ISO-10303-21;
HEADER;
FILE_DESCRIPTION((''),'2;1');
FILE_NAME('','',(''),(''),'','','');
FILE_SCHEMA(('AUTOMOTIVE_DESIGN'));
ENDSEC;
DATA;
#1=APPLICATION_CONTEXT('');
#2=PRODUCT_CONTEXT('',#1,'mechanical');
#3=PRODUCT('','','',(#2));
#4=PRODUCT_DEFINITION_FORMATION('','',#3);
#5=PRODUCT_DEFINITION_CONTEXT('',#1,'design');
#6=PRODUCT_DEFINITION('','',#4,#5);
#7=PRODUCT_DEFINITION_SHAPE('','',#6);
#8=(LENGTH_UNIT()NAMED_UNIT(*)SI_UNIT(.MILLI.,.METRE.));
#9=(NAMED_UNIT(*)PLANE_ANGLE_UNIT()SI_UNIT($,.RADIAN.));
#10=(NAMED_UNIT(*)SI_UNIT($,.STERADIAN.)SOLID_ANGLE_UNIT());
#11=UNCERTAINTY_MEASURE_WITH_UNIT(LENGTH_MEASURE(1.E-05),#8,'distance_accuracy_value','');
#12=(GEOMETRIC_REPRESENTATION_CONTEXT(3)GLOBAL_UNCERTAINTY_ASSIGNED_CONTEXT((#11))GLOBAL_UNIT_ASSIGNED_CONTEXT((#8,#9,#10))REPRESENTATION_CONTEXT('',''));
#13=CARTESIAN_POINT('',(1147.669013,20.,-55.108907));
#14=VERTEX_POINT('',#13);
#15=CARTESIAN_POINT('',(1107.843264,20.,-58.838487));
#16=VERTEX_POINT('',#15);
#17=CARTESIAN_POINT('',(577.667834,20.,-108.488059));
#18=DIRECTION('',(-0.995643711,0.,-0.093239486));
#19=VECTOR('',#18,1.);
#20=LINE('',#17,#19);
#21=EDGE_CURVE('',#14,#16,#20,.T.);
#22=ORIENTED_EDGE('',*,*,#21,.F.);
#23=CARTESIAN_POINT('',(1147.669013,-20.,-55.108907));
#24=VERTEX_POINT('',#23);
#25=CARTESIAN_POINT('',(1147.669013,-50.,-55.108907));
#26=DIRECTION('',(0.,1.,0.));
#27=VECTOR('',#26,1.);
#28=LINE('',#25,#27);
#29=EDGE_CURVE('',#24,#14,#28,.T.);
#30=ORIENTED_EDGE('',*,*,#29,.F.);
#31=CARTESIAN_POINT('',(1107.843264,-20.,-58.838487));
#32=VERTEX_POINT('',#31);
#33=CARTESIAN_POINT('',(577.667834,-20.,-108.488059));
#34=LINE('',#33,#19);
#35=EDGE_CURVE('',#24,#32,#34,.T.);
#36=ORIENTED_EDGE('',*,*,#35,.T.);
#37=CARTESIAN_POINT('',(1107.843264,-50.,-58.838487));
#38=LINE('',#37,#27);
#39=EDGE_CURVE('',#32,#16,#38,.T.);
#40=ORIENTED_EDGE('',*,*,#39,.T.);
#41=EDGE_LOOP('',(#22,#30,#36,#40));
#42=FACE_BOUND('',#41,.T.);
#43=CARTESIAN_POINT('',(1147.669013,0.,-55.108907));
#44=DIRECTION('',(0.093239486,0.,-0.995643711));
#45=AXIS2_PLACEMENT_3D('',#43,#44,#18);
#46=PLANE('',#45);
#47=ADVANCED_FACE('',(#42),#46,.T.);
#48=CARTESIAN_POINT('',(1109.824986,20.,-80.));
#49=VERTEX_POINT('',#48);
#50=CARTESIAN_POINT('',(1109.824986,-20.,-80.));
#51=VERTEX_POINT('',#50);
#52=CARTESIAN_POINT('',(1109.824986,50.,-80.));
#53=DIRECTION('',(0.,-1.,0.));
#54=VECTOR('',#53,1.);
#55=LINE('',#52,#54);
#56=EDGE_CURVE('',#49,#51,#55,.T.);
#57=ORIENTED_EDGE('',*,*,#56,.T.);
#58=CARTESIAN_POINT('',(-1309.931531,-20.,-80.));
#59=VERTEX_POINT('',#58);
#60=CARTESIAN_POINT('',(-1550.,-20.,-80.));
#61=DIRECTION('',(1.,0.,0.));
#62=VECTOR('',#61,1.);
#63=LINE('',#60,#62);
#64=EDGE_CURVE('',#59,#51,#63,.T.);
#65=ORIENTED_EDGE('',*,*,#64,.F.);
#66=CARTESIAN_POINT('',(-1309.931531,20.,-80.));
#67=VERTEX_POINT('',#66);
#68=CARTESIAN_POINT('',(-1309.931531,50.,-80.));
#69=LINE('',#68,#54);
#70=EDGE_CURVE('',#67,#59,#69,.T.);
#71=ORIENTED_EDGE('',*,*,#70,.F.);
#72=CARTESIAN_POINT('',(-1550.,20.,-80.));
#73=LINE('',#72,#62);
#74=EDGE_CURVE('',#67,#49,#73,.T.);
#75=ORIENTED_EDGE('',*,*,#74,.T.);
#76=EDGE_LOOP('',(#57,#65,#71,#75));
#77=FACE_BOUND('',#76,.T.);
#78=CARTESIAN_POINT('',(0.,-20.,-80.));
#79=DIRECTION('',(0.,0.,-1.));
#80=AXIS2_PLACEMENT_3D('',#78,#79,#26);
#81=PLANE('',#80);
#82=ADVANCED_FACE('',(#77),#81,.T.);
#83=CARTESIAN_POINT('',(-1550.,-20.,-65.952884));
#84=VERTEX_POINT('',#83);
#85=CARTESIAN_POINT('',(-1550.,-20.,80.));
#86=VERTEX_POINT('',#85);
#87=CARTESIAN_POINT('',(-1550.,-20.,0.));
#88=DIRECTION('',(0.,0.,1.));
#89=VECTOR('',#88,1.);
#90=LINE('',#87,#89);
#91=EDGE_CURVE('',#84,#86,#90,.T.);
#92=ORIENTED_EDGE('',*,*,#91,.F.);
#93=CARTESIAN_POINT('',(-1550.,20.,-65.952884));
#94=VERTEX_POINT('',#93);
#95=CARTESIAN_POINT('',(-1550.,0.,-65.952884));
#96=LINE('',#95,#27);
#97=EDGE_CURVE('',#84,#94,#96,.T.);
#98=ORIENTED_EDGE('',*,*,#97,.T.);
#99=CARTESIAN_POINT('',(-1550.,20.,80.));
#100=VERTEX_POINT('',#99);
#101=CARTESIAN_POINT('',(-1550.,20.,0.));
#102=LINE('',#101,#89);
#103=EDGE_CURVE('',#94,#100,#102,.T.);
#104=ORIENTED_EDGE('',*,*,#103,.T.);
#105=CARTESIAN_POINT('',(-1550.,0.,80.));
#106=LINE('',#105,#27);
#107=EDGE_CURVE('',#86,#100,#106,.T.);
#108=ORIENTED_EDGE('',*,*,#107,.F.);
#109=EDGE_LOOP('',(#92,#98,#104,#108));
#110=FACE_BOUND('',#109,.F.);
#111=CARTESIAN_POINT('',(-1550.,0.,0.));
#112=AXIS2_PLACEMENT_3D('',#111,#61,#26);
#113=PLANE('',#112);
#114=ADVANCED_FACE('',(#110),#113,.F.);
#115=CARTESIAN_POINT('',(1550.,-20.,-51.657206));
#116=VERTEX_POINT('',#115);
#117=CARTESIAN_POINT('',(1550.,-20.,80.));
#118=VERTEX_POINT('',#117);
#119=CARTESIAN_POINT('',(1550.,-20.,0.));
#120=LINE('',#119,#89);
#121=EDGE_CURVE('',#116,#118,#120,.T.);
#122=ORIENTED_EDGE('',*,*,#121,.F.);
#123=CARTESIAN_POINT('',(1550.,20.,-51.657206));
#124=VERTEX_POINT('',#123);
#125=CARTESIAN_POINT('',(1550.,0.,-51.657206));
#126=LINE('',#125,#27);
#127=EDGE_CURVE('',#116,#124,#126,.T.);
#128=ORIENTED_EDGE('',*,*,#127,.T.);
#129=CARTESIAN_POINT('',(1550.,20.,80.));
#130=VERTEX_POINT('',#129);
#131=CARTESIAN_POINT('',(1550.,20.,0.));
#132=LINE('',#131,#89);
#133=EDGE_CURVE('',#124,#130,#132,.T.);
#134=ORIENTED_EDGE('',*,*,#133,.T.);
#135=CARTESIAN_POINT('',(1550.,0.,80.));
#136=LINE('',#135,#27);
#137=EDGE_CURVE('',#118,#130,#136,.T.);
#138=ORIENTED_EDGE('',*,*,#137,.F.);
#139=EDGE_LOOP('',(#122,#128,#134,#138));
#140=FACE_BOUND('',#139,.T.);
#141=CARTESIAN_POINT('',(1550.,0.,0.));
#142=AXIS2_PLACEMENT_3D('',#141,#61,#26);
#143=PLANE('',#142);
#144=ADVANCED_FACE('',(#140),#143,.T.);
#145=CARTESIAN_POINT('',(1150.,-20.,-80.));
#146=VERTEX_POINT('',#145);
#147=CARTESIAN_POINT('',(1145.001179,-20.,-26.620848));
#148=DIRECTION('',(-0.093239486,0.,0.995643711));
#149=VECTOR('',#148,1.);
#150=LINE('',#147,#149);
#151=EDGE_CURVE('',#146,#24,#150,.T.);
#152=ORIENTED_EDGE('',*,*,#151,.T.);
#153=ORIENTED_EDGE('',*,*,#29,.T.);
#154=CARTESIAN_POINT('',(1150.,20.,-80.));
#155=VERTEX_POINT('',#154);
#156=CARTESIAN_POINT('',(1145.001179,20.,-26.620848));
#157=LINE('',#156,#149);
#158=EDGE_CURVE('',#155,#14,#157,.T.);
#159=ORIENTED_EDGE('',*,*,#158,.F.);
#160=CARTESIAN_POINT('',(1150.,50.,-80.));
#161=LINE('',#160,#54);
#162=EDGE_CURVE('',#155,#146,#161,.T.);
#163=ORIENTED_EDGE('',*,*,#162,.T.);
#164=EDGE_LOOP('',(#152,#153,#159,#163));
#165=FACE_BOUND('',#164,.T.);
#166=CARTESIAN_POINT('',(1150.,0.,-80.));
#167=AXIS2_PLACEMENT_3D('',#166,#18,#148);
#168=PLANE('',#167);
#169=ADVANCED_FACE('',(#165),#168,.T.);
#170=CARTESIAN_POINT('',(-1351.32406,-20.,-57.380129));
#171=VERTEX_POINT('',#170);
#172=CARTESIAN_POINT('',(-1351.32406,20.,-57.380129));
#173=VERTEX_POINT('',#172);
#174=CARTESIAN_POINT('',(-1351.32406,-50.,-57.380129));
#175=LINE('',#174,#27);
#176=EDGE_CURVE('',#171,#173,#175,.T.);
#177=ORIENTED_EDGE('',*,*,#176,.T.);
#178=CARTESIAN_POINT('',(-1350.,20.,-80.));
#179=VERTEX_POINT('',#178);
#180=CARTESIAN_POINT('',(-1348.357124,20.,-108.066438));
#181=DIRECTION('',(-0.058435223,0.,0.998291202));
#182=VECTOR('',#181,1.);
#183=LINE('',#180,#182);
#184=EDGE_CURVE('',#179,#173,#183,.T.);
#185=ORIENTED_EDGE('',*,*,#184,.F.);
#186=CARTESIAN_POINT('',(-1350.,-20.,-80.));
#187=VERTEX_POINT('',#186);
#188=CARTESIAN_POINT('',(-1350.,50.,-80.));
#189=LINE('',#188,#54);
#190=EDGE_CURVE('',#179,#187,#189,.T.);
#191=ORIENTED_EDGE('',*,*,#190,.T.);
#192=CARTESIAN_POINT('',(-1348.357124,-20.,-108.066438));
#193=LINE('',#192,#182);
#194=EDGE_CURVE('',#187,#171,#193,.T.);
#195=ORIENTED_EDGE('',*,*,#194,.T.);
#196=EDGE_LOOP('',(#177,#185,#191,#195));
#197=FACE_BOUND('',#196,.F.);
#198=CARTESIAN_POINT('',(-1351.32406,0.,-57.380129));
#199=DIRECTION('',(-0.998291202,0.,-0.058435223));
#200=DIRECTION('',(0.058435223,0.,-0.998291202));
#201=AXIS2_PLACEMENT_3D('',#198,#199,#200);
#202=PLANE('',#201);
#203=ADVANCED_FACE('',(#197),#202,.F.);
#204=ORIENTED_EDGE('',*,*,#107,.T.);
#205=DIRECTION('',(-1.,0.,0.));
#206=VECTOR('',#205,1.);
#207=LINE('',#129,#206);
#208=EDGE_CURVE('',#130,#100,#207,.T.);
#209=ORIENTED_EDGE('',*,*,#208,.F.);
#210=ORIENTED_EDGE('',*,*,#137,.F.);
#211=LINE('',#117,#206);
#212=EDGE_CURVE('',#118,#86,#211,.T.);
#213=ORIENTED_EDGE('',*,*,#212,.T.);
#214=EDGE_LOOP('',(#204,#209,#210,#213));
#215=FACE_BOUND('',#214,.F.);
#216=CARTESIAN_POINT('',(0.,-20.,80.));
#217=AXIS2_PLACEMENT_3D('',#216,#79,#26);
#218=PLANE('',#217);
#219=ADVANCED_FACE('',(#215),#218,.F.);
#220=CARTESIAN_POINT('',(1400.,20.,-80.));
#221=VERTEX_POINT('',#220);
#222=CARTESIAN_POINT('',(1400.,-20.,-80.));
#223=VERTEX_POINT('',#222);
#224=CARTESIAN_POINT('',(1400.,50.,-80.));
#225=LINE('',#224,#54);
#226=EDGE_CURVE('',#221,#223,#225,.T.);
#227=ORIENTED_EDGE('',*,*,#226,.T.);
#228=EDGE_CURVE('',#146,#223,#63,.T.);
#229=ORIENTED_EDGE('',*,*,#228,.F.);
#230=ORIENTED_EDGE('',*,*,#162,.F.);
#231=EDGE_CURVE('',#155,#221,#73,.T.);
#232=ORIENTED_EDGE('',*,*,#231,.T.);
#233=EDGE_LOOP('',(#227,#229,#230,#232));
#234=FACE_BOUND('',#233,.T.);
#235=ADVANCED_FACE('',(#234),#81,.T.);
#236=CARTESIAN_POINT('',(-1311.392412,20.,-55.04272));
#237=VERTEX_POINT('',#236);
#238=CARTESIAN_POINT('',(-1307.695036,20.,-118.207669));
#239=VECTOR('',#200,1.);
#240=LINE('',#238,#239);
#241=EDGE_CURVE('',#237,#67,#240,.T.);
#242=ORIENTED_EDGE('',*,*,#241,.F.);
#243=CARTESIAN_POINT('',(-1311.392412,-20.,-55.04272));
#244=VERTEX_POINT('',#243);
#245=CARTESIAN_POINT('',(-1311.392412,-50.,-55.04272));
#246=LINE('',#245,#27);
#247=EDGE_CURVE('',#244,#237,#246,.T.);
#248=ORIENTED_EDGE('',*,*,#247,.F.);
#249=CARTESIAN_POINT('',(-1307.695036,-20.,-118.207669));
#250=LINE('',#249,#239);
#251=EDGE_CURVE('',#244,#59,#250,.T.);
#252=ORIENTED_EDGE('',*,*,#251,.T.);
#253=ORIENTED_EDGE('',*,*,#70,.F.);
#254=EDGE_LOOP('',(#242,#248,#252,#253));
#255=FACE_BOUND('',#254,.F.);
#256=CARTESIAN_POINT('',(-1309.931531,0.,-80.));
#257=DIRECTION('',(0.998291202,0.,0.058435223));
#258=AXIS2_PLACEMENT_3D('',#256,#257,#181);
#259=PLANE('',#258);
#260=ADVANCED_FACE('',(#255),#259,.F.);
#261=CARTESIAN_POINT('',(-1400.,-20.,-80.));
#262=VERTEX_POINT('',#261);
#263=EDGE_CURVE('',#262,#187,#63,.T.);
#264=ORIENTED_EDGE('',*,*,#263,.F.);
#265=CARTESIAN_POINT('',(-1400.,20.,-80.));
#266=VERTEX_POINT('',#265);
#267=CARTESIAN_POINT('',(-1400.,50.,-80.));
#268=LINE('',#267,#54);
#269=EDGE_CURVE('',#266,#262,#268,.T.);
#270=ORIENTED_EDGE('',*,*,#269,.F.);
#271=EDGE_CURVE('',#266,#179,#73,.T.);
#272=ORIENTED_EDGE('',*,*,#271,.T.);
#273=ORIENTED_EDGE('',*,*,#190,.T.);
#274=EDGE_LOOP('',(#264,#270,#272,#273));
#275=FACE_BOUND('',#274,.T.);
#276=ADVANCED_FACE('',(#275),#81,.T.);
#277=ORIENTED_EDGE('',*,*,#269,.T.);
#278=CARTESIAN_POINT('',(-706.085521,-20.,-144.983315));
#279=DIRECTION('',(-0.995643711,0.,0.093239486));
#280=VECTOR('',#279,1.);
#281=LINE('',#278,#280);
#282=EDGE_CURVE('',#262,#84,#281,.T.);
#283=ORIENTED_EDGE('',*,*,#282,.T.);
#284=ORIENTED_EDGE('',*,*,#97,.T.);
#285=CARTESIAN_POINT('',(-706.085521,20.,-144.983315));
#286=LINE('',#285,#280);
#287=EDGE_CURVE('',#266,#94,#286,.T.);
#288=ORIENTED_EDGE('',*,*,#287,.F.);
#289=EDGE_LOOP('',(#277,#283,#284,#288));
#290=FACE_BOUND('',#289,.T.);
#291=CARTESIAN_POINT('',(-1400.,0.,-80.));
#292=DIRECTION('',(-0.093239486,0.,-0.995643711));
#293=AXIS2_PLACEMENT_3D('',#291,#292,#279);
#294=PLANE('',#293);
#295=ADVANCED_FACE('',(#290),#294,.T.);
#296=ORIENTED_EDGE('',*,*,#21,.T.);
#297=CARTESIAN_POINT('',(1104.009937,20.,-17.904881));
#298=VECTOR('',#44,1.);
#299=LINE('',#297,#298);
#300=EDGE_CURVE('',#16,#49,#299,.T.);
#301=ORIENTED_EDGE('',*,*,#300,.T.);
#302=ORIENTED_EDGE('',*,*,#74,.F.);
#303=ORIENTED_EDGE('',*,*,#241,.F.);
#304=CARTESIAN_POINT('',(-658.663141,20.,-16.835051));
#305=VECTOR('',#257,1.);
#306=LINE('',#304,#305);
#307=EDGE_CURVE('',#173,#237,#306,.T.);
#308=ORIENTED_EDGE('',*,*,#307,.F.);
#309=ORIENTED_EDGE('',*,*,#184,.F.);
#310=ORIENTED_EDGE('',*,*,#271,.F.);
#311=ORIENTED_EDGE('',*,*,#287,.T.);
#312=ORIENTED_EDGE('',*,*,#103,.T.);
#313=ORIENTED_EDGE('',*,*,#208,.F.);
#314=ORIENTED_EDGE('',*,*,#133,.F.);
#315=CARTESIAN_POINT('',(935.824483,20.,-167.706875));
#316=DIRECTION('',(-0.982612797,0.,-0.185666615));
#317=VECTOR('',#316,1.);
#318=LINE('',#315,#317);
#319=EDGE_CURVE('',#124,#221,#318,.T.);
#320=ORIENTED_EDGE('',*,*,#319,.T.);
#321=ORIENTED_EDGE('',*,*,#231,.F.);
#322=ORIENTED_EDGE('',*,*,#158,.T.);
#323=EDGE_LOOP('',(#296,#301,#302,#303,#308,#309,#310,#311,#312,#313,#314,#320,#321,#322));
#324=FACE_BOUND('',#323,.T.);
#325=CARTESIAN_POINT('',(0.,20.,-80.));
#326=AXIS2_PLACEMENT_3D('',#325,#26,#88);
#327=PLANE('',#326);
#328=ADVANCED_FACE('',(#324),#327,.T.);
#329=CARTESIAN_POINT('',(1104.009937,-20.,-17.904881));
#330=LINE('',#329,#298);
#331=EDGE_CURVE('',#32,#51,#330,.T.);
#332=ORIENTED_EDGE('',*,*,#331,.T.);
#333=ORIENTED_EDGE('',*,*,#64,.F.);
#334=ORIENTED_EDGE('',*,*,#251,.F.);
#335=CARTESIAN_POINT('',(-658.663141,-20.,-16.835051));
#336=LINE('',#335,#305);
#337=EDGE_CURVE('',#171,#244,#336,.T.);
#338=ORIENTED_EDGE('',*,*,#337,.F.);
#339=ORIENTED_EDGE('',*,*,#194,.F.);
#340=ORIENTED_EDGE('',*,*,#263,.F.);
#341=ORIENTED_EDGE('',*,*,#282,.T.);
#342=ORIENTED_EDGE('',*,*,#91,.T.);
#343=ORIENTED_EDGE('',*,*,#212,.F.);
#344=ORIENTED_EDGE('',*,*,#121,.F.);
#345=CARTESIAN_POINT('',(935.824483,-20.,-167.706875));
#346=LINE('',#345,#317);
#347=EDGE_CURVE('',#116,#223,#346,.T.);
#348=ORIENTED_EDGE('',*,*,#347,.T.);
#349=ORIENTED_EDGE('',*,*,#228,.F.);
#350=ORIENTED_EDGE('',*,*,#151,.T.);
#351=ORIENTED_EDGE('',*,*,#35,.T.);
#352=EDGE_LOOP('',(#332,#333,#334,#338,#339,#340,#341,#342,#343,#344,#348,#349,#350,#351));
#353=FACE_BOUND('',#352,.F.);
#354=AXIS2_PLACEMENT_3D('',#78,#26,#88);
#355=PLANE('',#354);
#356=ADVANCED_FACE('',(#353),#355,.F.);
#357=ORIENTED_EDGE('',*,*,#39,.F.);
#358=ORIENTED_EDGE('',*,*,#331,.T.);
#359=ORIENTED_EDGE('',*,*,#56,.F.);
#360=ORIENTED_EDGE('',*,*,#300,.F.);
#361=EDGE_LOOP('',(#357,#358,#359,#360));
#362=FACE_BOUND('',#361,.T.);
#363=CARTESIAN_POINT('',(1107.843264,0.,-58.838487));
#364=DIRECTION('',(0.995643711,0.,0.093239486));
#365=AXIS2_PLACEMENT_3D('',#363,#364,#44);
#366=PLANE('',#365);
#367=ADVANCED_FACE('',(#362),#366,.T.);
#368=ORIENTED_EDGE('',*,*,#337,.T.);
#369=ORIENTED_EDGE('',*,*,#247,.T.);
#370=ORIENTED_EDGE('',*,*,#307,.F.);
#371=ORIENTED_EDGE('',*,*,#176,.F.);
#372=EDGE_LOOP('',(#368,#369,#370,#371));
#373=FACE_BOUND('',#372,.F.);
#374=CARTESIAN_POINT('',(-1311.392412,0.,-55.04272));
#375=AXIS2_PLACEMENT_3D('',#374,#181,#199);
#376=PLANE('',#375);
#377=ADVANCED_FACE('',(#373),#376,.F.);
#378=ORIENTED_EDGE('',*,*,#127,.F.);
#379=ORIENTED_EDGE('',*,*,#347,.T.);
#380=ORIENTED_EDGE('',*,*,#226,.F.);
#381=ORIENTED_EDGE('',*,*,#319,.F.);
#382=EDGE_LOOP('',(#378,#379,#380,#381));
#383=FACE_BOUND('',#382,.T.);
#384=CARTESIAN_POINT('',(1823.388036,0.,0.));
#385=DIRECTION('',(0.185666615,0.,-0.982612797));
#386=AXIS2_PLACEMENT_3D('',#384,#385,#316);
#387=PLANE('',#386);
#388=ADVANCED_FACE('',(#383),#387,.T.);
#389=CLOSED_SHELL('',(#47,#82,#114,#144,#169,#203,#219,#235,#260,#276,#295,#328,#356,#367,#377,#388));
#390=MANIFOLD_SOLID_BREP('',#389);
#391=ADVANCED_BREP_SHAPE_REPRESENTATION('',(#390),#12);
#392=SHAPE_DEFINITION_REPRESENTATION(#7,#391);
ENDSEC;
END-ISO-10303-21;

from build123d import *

# Parameters (mm, degrees)
F1_W     = 40
F1_H     = 160
F2_DEPTH = 1550
F4_DEPTH = 50


with BuildPart() as f2:
    # F1 (on Right) → F2 (new body, symmetric)
    with BuildSketch(Plane.YZ):
        Rectangle(F1_W, F1_H)
    extrude(amount=F2_DEPTH, both=True)

    # F3 (on Front) → F4 (cut, symmetric)
    with BuildSketch(Plane.XZ):
        Polygon((1823.3880364558, -300), (1823.3880364558, 0), (1400, -80), (1400, -180), (-1400, -180), (-1400, -80), (-2254.2678682115, 0), (-2254.2678682115, -300), align=None)
        Polygon((1107.8432644326, -58.8384866727), (1109.8249860087, -80), (1150, -80), (1147.6690128529, -55.1089072373), align=None)
        Polygon((-1351.3240597547, -57.380128841), (-1350, -80), (-1309.9315310961, -80), (-1311.3924116591, -55.0427199403), align=None)
    extrude(amount=F4_DEPTH, both=True, mode=Mode.SUBTRACT)


solid = f2.part
